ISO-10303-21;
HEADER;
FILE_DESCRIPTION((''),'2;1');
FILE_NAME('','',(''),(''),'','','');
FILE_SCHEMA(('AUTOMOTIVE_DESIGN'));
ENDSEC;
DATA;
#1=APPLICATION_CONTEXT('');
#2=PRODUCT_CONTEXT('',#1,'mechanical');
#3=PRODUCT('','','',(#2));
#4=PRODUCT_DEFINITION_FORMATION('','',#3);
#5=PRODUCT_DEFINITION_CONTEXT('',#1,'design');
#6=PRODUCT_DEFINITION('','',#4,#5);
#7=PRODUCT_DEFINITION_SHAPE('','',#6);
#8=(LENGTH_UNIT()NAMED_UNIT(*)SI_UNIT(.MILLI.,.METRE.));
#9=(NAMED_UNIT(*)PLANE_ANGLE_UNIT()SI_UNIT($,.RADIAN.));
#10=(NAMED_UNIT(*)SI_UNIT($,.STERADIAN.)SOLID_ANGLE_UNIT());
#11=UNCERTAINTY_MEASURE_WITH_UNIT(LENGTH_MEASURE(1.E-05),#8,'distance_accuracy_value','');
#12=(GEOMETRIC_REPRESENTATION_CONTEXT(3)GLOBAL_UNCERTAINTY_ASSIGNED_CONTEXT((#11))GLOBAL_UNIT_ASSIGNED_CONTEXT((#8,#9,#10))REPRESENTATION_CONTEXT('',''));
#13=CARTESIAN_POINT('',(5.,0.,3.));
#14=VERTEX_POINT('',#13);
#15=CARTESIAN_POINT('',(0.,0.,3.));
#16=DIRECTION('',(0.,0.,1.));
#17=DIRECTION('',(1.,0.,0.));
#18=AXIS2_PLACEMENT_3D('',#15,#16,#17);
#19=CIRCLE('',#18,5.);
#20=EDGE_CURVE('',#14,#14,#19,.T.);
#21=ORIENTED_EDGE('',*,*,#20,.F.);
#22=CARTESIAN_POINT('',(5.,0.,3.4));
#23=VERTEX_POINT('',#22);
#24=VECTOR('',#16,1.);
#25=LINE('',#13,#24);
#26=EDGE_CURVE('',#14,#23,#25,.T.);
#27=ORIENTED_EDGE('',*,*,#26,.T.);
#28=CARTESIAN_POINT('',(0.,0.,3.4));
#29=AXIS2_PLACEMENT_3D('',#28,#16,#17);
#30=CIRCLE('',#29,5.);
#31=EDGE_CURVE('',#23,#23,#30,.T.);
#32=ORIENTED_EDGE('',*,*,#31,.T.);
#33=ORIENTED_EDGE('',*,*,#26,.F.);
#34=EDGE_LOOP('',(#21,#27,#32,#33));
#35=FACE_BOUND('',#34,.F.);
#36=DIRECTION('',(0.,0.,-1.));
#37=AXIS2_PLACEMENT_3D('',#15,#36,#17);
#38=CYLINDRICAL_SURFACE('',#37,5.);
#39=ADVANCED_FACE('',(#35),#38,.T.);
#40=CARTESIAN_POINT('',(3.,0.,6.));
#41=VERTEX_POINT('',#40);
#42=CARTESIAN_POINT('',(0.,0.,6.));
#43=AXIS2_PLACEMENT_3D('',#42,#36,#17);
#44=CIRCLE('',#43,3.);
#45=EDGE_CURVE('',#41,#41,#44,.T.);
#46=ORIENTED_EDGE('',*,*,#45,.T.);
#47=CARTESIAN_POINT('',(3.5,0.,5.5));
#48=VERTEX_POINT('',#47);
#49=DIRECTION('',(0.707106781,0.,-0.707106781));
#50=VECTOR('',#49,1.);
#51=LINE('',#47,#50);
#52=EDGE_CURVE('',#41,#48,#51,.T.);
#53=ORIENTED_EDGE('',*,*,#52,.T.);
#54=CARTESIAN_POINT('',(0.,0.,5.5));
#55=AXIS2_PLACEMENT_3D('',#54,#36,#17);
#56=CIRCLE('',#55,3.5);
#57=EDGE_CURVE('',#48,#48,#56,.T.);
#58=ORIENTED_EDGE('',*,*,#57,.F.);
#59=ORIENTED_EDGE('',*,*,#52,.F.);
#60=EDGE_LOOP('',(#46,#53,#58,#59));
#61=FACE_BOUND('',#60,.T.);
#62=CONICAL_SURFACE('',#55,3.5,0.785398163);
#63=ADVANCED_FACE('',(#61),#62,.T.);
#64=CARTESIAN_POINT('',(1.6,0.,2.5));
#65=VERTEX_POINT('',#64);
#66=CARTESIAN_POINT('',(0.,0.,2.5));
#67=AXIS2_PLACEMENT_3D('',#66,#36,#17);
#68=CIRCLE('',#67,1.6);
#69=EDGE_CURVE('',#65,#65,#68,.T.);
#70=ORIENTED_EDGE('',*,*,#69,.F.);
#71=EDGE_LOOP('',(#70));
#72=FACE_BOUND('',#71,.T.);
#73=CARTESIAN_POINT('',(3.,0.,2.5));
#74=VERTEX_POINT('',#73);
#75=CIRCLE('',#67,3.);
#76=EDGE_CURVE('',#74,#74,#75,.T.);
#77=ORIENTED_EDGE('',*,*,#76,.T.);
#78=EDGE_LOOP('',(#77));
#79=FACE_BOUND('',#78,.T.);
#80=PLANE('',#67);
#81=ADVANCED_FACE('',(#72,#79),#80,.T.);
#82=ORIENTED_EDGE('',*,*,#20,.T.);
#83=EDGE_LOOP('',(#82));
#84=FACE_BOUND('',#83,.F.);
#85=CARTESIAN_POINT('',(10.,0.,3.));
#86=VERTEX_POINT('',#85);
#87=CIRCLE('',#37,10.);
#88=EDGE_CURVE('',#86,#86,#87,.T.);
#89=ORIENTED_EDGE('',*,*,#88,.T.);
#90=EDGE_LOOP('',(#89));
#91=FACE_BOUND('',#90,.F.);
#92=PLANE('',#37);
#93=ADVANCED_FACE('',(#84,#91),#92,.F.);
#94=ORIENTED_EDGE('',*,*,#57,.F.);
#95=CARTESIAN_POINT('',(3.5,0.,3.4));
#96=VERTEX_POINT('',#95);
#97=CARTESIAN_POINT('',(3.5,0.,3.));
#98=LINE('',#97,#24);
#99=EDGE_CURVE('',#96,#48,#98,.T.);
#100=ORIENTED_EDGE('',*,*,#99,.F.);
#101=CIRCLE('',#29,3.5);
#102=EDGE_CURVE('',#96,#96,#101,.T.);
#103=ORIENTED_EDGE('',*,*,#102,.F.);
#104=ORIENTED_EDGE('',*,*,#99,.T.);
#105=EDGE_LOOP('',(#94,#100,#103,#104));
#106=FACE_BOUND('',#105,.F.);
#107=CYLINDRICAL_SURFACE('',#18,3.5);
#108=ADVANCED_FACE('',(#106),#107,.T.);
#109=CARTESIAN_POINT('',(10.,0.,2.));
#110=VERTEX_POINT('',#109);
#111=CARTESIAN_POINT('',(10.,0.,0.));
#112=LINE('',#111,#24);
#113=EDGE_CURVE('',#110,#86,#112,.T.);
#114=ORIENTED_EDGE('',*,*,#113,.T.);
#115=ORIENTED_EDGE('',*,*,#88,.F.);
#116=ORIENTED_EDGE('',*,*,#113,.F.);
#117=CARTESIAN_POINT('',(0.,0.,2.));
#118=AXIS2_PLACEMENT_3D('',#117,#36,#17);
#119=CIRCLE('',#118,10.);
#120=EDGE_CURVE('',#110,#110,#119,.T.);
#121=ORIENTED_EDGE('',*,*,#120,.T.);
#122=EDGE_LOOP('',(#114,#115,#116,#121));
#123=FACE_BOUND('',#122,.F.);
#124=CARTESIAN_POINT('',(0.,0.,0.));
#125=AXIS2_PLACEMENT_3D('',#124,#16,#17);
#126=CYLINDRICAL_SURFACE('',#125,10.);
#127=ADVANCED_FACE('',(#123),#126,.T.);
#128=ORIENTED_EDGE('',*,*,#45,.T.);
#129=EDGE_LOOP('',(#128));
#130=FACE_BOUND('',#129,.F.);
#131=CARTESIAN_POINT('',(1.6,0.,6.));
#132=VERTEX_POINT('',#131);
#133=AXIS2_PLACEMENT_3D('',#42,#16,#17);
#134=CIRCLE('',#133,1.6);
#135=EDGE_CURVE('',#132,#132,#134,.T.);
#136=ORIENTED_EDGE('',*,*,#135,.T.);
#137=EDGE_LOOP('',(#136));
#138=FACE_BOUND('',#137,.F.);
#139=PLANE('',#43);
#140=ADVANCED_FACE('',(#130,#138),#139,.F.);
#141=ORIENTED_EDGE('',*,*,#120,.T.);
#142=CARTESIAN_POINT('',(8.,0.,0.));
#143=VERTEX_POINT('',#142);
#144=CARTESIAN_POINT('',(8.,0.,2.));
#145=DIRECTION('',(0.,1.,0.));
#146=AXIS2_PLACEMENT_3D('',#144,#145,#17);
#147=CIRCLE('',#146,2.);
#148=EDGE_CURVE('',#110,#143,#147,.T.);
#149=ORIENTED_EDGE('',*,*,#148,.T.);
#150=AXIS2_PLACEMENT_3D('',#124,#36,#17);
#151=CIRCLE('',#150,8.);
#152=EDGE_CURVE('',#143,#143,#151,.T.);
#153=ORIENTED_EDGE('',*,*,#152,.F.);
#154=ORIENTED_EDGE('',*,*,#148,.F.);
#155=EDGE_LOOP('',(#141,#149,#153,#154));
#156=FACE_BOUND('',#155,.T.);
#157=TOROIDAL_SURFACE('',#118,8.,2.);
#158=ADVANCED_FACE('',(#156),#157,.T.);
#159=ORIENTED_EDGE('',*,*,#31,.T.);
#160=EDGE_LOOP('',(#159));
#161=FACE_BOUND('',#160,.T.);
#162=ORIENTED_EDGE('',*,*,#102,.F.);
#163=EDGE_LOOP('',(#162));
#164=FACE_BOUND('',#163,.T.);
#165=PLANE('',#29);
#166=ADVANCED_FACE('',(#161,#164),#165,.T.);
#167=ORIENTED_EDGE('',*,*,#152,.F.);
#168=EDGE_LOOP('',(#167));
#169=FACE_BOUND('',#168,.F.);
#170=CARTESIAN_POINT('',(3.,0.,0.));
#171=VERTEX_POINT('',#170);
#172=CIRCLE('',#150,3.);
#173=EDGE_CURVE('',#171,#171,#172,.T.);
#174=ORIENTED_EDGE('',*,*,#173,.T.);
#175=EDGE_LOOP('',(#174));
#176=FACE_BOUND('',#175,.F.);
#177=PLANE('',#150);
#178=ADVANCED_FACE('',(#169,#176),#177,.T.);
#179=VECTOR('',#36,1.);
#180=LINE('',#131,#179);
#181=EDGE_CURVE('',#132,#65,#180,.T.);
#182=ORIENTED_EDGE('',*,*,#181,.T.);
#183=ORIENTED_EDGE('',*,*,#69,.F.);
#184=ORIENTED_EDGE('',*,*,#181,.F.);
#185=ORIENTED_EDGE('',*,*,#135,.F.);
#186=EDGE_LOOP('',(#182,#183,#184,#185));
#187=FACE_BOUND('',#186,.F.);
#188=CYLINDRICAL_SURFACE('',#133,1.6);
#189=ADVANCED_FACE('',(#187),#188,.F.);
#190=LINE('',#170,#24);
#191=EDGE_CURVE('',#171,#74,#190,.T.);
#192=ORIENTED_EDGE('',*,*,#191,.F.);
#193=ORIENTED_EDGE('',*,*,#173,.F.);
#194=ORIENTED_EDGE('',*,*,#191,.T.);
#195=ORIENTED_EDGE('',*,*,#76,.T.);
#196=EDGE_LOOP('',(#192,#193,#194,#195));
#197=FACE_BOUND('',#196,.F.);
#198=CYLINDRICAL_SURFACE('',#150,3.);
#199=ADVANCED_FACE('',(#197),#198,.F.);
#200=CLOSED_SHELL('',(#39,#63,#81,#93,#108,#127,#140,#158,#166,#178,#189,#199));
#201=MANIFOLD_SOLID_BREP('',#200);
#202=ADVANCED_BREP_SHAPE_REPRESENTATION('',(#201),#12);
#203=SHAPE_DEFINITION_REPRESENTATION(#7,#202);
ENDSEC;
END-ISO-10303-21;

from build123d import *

# Parameters (mm, degrees)
F2_SIZE  = 0.5
F3_R     = 5
F3_R_2   = 3.5
F4_DEPTH = 0.4
F5_R     = 2
F6_R     = 1.6
F7_DEPTH = 25
F8_R     = 3
F8_R_2   = 1.6
F9_DEPTH = 2.5


# Not quite as in the source:
# - a feature names something its author has since deleted; it is built from what else it names


with BuildPart() as f1:
    # F0 (on Front) → F1 (revolve)
    with BuildSketch(Plane.XZ):
        Polygon((3.5, 6), (0, 6), (0, 0), (10, 0), (10, 3), (3.5, 3), align=None)
    revolve(axis=Axis((0, 0, 3), (0, 0, -1)))

    # F2
    f2_edges = [f1.edges().sort_by_distance(p)[0] for p in [
        (-3.5, 0, 6),
    ]]
    chamfer(f2_edges, length=F2_SIZE)

    # F3 (on face) → F4 (join)
    with BuildSketch(Plane.XY.offset(3)):
        Circle(F3_R)
        Circle(F3_R_2, mode=Mode.SUBTRACT)
    extrude(amount=F4_DEPTH)

    # F5
    f5_edges = [f1.edges().sort_by_distance(p)[0] for p in [
        (-10, 0, 0),
    ]]
    fillet(f5_edges, radius=F5_R)

    # F6 (on face) → F7 (cut)
    with BuildSketch(Plane.XY.offset(6)):
        Circle(F6_R)
    extrude(amount=-F7_DEPTH, mode=Mode.SUBTRACT)

    # F8 (on face) → F9 (cut)
    with BuildSketch(Plane(origin=(0, 0, 0), x_dir=(1, 0, 0), z_dir=(0, 0, -1))):
        Circle(F8_R)
        Circle(F8_R_2, mode=Mode.SUBTRACT)
    extrude(amount=-F9_DEPTH, mode=Mode.SUBTRACT)


solid = f1.part
